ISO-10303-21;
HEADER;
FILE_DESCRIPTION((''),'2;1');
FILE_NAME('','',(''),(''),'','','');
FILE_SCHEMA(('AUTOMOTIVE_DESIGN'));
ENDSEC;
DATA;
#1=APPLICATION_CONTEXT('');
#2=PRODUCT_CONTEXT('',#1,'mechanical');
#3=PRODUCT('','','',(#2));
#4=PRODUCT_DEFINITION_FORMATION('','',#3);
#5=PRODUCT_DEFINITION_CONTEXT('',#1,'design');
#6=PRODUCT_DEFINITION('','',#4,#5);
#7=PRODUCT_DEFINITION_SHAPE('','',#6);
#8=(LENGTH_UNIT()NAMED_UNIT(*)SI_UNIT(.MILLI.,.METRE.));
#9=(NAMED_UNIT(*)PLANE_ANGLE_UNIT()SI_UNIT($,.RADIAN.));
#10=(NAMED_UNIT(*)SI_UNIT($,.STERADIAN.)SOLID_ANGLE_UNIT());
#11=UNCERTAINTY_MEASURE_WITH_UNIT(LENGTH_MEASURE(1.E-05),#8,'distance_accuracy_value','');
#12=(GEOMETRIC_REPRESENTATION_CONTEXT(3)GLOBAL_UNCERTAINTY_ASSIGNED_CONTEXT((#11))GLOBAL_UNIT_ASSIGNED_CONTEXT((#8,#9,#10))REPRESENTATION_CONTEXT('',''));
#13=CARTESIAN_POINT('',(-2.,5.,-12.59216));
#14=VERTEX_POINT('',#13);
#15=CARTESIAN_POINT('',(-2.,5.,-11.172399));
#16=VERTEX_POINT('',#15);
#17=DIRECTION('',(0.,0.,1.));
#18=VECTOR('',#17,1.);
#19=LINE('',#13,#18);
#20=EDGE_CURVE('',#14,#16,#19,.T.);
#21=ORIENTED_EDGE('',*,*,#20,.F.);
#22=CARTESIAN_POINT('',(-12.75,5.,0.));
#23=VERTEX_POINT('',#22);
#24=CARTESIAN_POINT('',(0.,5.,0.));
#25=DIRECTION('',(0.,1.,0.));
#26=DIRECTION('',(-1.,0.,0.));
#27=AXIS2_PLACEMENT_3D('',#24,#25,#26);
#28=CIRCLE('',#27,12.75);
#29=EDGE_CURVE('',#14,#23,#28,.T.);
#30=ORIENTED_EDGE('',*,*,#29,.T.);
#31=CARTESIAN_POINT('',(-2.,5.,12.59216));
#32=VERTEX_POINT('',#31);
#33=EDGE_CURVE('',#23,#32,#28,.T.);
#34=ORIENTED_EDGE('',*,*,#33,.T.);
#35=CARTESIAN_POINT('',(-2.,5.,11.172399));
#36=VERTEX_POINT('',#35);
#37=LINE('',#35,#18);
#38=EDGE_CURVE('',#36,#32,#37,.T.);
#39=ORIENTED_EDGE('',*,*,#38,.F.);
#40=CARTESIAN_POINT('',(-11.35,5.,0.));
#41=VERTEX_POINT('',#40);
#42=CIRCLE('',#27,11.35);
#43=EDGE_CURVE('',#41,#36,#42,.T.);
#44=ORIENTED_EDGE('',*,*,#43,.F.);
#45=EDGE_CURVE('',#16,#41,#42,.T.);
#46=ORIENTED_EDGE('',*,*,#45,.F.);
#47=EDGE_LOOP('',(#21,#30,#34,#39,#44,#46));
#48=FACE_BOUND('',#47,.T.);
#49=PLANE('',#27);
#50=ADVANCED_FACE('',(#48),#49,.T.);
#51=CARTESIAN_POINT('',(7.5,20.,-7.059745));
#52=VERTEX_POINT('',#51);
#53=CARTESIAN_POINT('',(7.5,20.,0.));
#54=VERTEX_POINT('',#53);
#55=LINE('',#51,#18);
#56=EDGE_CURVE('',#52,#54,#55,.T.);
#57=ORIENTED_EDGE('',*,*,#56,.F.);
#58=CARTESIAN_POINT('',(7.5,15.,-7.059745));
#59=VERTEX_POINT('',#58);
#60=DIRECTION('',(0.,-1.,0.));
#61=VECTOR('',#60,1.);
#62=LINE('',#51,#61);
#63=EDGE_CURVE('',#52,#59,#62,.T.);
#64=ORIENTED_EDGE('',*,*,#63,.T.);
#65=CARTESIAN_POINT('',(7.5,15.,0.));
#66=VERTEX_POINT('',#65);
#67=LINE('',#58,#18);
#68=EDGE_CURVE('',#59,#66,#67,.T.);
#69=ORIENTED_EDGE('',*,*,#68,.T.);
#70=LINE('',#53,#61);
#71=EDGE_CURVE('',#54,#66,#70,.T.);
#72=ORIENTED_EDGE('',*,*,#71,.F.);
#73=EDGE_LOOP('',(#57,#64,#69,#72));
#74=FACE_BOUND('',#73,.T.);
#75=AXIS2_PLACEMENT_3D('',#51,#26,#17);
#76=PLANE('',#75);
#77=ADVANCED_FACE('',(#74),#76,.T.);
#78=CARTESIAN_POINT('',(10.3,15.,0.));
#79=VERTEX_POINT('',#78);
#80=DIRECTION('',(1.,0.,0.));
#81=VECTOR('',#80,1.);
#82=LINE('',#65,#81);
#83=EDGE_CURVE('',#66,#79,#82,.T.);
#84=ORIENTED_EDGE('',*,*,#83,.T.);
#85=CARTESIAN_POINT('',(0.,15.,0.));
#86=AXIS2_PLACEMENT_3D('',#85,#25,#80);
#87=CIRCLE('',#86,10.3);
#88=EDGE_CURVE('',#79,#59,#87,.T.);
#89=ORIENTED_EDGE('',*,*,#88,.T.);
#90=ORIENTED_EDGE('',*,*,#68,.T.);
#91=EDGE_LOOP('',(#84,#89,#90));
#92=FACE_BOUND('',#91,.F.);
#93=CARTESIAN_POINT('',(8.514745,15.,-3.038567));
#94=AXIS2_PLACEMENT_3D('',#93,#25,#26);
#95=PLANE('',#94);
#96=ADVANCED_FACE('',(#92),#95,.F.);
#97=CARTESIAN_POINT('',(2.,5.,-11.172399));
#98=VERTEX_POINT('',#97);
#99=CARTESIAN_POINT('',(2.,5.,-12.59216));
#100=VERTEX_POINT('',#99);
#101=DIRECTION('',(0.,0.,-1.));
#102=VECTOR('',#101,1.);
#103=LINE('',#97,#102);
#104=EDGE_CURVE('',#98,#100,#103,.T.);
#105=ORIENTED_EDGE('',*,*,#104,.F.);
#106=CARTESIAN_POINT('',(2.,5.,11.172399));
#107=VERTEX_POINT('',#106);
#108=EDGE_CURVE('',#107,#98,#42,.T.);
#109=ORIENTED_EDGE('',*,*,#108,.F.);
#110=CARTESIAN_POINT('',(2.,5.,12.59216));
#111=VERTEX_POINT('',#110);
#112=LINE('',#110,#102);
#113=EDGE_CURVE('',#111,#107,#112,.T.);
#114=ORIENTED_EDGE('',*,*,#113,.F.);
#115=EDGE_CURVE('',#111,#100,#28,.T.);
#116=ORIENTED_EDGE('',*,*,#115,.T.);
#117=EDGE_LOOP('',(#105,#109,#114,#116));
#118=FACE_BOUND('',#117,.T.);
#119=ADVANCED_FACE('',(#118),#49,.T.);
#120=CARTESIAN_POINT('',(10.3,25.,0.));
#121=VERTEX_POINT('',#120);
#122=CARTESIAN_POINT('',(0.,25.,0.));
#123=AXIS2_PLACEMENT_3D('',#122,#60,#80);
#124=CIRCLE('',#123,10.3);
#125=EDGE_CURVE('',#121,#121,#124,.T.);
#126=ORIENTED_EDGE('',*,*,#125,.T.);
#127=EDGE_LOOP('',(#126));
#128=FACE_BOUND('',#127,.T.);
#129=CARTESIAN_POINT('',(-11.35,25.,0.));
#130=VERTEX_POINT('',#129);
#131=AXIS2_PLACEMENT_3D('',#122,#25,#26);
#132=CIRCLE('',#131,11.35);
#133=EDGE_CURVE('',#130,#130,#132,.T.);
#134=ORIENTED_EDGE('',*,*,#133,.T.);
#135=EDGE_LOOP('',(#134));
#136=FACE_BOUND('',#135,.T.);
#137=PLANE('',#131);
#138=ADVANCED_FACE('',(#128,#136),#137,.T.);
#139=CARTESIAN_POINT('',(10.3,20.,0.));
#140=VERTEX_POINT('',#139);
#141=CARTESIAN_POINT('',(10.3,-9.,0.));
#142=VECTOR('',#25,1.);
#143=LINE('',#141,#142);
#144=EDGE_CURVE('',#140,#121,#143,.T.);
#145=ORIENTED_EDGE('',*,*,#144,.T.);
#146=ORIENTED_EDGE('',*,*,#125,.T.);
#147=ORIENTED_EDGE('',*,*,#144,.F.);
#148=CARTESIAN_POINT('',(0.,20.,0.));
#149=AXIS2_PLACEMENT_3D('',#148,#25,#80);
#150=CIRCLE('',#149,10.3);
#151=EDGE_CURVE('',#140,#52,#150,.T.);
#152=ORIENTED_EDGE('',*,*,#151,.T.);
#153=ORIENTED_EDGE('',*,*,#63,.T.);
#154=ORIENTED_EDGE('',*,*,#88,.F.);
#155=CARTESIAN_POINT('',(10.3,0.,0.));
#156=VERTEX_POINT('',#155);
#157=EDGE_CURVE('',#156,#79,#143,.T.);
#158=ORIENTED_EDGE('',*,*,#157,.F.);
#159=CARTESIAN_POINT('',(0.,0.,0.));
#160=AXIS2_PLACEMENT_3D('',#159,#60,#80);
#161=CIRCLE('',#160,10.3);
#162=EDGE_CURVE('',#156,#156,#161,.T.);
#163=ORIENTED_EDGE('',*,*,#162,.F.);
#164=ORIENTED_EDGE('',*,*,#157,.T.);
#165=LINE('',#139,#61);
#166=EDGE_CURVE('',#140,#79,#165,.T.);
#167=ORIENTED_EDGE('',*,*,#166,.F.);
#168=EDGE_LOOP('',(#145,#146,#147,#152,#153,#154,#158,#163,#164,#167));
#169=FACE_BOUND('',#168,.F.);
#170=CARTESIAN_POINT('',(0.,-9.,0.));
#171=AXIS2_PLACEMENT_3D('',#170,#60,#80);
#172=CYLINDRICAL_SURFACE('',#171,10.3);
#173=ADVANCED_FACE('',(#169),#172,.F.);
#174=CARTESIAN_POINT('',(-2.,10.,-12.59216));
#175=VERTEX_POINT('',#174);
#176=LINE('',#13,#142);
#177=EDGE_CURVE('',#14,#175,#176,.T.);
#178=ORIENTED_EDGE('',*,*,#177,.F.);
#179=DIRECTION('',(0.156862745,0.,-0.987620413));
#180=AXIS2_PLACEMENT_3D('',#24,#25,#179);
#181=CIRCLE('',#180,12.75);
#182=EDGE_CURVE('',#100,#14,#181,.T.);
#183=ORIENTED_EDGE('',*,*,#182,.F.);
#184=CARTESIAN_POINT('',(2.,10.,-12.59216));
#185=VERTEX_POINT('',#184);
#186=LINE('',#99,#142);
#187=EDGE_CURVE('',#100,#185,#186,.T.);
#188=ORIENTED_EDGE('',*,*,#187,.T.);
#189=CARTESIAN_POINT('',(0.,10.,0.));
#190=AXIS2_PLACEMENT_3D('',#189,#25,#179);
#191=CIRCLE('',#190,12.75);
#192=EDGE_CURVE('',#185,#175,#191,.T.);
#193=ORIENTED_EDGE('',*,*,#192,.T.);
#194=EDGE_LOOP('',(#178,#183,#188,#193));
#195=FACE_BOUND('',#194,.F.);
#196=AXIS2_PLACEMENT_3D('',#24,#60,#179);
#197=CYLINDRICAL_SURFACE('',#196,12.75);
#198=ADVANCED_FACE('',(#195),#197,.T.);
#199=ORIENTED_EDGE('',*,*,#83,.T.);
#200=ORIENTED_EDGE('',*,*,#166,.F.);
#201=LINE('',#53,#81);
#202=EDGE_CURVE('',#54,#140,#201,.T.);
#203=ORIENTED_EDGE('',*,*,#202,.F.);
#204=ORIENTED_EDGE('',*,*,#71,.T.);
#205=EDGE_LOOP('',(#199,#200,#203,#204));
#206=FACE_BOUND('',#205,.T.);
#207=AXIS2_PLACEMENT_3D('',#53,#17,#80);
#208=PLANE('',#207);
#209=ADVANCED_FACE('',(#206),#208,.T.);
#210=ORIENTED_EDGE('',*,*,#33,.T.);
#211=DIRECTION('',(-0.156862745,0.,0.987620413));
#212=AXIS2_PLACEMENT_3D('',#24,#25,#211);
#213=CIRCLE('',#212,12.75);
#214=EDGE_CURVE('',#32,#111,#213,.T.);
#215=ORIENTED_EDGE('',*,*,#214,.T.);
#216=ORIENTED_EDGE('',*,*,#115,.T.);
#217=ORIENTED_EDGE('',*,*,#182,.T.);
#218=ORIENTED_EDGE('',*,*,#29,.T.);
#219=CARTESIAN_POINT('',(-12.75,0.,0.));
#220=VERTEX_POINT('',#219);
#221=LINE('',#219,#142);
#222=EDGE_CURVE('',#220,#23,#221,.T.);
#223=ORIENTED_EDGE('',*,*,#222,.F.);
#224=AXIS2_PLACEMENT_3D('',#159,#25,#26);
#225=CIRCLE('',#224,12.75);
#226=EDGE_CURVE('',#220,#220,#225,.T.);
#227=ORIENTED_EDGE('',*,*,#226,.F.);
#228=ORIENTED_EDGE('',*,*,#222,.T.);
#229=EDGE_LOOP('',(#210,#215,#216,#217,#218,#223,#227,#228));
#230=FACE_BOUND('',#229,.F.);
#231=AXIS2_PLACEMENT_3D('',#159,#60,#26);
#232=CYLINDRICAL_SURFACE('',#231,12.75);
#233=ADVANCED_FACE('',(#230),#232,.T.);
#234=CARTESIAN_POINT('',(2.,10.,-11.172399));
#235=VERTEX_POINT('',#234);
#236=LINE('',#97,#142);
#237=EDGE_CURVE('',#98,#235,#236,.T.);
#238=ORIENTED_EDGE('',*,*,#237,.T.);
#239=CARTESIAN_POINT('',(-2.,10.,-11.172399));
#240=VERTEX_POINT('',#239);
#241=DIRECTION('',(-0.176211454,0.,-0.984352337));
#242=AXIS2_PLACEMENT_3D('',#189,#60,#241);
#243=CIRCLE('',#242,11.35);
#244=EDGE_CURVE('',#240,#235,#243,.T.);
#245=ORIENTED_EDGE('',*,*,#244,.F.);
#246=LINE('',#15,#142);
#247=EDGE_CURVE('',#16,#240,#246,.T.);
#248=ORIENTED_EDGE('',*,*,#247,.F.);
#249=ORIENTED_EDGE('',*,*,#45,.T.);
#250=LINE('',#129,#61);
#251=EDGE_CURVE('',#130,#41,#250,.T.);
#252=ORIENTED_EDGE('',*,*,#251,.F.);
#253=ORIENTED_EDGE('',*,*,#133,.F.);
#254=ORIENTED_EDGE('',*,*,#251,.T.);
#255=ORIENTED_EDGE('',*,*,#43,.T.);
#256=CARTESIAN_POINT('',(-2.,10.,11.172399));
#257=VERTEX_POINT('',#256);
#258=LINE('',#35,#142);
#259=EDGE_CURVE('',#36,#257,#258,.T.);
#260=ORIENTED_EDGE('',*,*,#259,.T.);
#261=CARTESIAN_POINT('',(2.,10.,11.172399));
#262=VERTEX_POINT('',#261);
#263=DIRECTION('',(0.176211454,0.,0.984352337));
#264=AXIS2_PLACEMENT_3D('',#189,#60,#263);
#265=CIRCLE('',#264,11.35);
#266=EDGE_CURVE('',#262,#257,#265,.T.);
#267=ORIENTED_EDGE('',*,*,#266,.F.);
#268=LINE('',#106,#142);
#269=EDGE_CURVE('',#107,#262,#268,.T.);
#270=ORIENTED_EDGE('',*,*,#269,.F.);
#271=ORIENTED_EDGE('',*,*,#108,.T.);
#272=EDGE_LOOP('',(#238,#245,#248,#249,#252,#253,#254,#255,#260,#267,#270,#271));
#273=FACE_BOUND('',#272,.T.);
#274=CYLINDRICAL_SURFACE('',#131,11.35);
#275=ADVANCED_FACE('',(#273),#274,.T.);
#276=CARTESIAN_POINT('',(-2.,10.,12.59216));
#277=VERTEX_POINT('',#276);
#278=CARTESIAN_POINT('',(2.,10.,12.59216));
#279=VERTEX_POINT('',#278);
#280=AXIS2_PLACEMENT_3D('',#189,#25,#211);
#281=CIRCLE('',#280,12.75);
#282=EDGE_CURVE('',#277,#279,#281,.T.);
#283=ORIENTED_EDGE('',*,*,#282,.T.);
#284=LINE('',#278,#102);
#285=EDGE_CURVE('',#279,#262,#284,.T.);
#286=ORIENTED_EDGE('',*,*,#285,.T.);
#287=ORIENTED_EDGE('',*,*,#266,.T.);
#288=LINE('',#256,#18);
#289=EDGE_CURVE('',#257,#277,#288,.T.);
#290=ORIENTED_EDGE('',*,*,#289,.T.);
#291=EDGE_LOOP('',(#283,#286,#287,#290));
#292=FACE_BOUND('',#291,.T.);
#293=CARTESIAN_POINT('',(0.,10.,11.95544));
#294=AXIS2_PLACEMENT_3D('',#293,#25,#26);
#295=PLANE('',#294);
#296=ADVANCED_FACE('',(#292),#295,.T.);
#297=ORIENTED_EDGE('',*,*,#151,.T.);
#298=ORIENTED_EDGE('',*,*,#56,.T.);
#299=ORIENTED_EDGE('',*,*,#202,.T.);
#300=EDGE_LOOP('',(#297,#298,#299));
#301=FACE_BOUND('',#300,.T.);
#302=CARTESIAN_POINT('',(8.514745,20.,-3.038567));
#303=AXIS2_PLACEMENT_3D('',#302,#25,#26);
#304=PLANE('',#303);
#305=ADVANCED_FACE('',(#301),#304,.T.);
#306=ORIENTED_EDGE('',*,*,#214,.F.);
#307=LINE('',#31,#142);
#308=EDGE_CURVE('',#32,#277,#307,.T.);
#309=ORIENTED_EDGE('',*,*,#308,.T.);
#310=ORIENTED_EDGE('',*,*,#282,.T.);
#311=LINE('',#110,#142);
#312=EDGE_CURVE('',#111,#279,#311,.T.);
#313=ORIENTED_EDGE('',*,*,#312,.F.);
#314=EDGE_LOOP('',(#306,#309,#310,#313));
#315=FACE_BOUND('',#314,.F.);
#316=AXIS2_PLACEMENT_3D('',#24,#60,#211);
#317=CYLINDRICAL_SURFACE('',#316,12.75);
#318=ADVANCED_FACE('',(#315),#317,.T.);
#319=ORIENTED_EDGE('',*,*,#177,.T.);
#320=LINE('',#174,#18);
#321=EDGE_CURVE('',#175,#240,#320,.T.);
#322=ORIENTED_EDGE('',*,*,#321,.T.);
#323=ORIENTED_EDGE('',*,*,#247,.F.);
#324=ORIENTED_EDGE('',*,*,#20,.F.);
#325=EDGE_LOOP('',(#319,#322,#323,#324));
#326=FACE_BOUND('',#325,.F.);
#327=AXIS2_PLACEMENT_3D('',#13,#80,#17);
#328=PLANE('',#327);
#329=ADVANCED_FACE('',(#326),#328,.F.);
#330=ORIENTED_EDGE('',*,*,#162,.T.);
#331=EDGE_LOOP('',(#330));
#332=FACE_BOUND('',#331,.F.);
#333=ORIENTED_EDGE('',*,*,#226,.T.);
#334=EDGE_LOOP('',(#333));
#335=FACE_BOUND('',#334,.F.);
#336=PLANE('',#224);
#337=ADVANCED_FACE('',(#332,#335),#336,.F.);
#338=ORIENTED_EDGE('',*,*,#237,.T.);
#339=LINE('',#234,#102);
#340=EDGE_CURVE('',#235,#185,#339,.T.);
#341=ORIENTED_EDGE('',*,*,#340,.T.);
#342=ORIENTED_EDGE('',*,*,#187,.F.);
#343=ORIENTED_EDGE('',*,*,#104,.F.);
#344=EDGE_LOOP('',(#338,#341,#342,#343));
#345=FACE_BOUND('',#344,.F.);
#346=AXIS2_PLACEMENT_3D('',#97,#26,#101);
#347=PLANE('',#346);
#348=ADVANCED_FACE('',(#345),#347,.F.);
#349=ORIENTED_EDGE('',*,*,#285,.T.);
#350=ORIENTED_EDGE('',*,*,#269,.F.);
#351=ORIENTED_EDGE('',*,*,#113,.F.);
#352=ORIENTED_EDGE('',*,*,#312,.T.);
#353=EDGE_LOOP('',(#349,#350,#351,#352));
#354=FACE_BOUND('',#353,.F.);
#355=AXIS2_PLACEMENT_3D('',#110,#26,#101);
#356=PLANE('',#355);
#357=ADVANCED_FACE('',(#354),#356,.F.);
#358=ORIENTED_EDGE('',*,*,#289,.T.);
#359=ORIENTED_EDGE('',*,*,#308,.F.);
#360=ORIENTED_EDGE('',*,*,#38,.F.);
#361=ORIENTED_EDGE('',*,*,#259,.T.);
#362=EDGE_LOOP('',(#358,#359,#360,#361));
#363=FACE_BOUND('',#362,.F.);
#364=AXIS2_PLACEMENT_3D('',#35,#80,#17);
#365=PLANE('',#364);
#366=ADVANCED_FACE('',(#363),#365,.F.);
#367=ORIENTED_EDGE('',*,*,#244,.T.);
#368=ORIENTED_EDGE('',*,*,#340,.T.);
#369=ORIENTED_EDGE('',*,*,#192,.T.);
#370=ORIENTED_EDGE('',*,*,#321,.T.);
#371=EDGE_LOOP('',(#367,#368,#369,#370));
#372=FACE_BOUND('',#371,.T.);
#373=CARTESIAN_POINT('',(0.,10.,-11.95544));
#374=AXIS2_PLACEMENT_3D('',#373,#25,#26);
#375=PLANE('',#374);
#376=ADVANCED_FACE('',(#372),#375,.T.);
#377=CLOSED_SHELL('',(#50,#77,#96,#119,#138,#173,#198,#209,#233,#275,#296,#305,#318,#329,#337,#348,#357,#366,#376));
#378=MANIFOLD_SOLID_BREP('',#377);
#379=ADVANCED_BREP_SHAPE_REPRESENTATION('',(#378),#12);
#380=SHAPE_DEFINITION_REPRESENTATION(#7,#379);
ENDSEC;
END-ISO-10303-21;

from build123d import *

# Parameters (mm, degrees)
F0_R         = 10.3
F1_DEPTH     = 9
F3_R         = 3.1
F4_DEPTH     = 9.001
F6_DEPTH     = 1.8
F7_T4_ANGLE  = 359.64
F7_S5_R      = 3.1
F7_T6_DEPTH  = 5
F7_T10_ANGLE = 359.64
F7_S11_R     = 3.1
F7_T12_DEPTH = 5
F7_T16_ANGLE = 359.64
F7_S17_R     = 3.1
F7_T18_DEPTH = 5
F9_R         = 12.75
F10_DEPTH    = 25
F11_R        = 3.1
F12_DEPTH    = 34.0010001
F13_R        = 12.75
F13_R_2      = 11.35
F14_DEPTH    = 20
F16_DEPTH    = 5
F17_R        = 10.3
F18_DEPTH    = 34.0010001
F20_START    = -5
F20_DEPTH    = 5


# Not quite as in the source:
# - a fillet or chamfer that OpenCascade refuses, or shapes differently, is made with other operations: its cross-section is extruded or revolved along the edge and cut away or added


with BuildPart() as f1:
    # F0 (on Front) → F1 (new body)
    with BuildSketch(Plane.XZ):
        Circle(F0_R)
    extrude(amount=F1_DEPTH)

    # F3 (on face) → F4 (cut, through all)
    with BuildSketch(Plane.XZ.offset(9)):
        Circle(F3_R)
    extrude(amount=-F4_DEPTH, mode=Mode.SUBTRACT)

    # F5 (on face) → F6 (cut)
    with BuildSketch(Plane.XZ.offset(9)):
        with BuildLine():
            ThreePointArc((-3.0819681678, 0.333874546), (-2.6846787517, 1.55), (-1.8301279224, 2.502125454))
            ThreePointArc((-1.8301279224, 2.502125454), (-6.4951905284, 3.75), (-3.0819681678, 0.333874546))
        make_face()
        with BuildLine():
            ThreePointArc((6.8301270189, 2.5), (4.331189746, 4.9999997741), (1.8301279224, 2.502125454))
            ThreePointArc((1.8301279224, 2.502125454), (2.6846787517, 1.55), (3.0819681678, 0.333874546))
            ThreePointArc((3.0819681678, 0.333874546), (5.5810472546, 0.3354680497), (6.8301270189, 2.5))
        make_face()
        with BuildLine():
            ThreePointArc((1.2518402454, -2.836), (0, -3.1), (-1.2518402454, -2.836))
            ThreePointArc((-1.2518402454, -2.836), (-1.2490795384, -7.1655946774), (2.5, -5))
            ThreePointArc((2.5, -5), (2.1655946774, -3.7509204616), (1.2518402454, -2.836))
        make_face()
    extrude(amount=-F6_DEPTH, mode=Mode.SUBTRACT)

    # F7: fillet of radius 1 on 3 edges, made by hand


with BuildPart() as f7_tool2:
    # F7_s3 → F7_t4 (revolve)
    with BuildSketch(Plane(origin=(0.0078111935, 0, 0.0136280797), x_dir=(0, 1, 0), z_dir=(-0.497276838, 0, -0.8675919239))):
        with BuildLine():
            ThreePointArc((-8.2, -2.499975326), (-7.4928932188, -2.7928685448), (-7.2, -3.499975326))
            Line((-7.2, -3.499975326), (-7.18, -3.499975326))
            Line((-7.18, -3.499975326), (-7.18, -2.479975326))
            Line((-7.18, -2.479975326), (-8.2, -2.479975326))
            Line((-8.2, -2.479975326), (-8.2, -2.499975326))
        make_face()
    revolve(axis=Axis((-4.3301270189, -7.2, 2.5), (0, -1, 0)), revolution_arc=F7_T4_ANGLE)

    # F7_s5 → F7_t6 (cut, symmetric)
    with BuildSketch(Plane.XZ.offset(7.7)):
        Circle(F7_S5_R)
    extrude(amount=F7_T6_DEPTH, both=True, mode=Mode.SUBTRACT)


with BuildPart() as f1_1:
    add(f1.part)

    # F7_t1: union F7_tool2
    add(f7_tool2.part)


with BuildPart() as f7_tool8:
    # F7_s9 → F7_t10 (revolve)
    with BuildSketch(Plane(origin=(0.0078966665, 0, -0.0135787318), x_dir=(0, 1, 0), z_dir=(-0.5027182272, 0, 0.8644503364))):
        with BuildLine():
            ThreePointArc((-8.2, -2.499975326), (-7.4928932188, -2.7928685448), (-7.2, -3.499975326))
            Line((-7.2, -3.499975326), (-7.18, -3.499975326))
            Line((-7.18, -3.499975326), (-7.18, -2.479975326))
            Line((-7.18, -2.479975326), (-8.2, -2.479975326))
            Line((-8.2, -2.479975326), (-8.2, -2.499975326))
        make_face()
    revolve(axis=Axis((4.3301270189, -7.2, 2.5), (0, -1, 0)), revolution_arc=F7_T10_ANGLE)

    # F7_s11 → F7_t12 (cut, symmetric)
    with BuildSketch(Plane.XZ.offset(7.7)):
        Circle(F7_S11_R)
    extrude(amount=F7_T12_DEPTH, both=True, mode=Mode.SUBTRACT)


with BuildPart() as f1_2:
    add(f1_1.part)

    # F7_t7: union F7_tool8
    add(f7_tool8.part)


with BuildPart() as f7_tool14:
    # F7_s15 → F7_t16 (revolve)
    with BuildSketch(Plane(origin=(-0.0157078599, 0, -4.93479e-05), x_dir=(0, 1, 0), z_dir=(0.9999950652, 0, 0.0031415875))):
        with BuildLine():
            ThreePointArc((-8.2, -2.499975326), (-7.4928932188, -2.7928685448), (-7.2, -3.499975326))
            Line((-7.2, -3.499975326), (-7.18, -3.499975326))
            Line((-7.18, -3.499975326), (-7.18, -2.479975326))
            Line((-7.18, -2.479975326), (-8.2, -2.479975326))
            Line((-8.2, -2.479975326), (-8.2, -2.499975326))
        make_face()
    revolve(axis=Axis((0, -7.2, -5), (0, -1, 0)), revolution_arc=F7_T16_ANGLE)

    # F7_s17 → F7_t18 (cut, symmetric)
    with BuildSketch(Plane.XZ.offset(7.7)):
        Circle(F7_S17_R)
    extrude(amount=F7_T18_DEPTH, both=True, mode=Mode.SUBTRACT)


with BuildPart() as f1_3:
    add(f1_2.part)

    # F7_t13: union F7_tool14
    add(f7_tool14.part)

    # F9 (on offset) → F10 (join)
    with BuildSketch(Plane(origin=(0, 0, 0), x_dir=(-1, 0, 0), z_dir=(0, 1, 0))):
        Circle(F9_R)
    extrude(amount=F10_DEPTH)

    # F11 (on face) → F12 (cut, through all)
    with BuildSketch(Plane(origin=(0, 25, 0), x_dir=(-1, 0, 0), z_dir=(0, 1, 0))):
        Circle(F11_R)
    extrude(amount=-F12_DEPTH, mode=Mode.SUBTRACT)

    # F13 (on face) → F14 (cut)
    with BuildSketch(Plane(origin=(0, 25, 0), x_dir=(-1, 0, 0), z_dir=(0, 1, 0))):
        Circle(F13_R)
        Circle(F13_R_2, mode=Mode.SUBTRACT)
    extrude(amount=-F14_DEPTH, mode=Mode.SUBTRACT)

    # F15 (on face) → F16 (join)
    with BuildSketch(Plane(origin=(0, 5, 0), x_dir=(-1, 0, 0), z_dir=(0, 1, 0))):
        with BuildLine():
            ThreePointArc((2, 12.5921602595), (0, 12.75), (-2, 12.5921602595))
            Line((-2, 12.5921602595), (-2, 11.1723990262))
            ThreePointArc((-2, 11.1723990262), (0, 11.35), (2, 11.1723990262))
            Line((2, 11.1723990262), (2, 12.5921602595))
        make_face()
        with BuildLine():
            ThreePointArc((2, -11.1723990262), (0, -11.35), (-2, -11.1723990262))
            Line((-2, -11.1723990262), (-2, -12.5921602595))
            ThreePointArc((-2, -12.5921602595), (0, -12.75), (2, -12.5921602595))
            Line((2, -12.5921602595), (2, -11.1723990262))
        make_face()
    extrude(amount=F16_DEPTH)

    # F17 (on face) → F18 (cut, through all)
    with BuildSketch(Plane.XZ.offset(9)):
        Circle(F17_R)
    extrude(amount=-F18_DEPTH, mode=Mode.SUBTRACT)

    # F19 (on face) → F20 (join)
    with BuildSketch(Plane(origin=(0, 25, 0), x_dir=(-1, 0, 0), z_dir=(0, 1, 0)).offset(F20_START)):
        with BuildLine():
            Line((-7.5, 0), (-10.3, 0))
            ThreePointArc((-10.3, 0), (-9.5744451536, -3.7973675092), (-7.5, -7.0597450379))
            Line((-7.5, -7.0597450379), (-7.5, 0))
        make_face()
    extrude(amount=-F20_DEPTH)


solid = f1_3.part
